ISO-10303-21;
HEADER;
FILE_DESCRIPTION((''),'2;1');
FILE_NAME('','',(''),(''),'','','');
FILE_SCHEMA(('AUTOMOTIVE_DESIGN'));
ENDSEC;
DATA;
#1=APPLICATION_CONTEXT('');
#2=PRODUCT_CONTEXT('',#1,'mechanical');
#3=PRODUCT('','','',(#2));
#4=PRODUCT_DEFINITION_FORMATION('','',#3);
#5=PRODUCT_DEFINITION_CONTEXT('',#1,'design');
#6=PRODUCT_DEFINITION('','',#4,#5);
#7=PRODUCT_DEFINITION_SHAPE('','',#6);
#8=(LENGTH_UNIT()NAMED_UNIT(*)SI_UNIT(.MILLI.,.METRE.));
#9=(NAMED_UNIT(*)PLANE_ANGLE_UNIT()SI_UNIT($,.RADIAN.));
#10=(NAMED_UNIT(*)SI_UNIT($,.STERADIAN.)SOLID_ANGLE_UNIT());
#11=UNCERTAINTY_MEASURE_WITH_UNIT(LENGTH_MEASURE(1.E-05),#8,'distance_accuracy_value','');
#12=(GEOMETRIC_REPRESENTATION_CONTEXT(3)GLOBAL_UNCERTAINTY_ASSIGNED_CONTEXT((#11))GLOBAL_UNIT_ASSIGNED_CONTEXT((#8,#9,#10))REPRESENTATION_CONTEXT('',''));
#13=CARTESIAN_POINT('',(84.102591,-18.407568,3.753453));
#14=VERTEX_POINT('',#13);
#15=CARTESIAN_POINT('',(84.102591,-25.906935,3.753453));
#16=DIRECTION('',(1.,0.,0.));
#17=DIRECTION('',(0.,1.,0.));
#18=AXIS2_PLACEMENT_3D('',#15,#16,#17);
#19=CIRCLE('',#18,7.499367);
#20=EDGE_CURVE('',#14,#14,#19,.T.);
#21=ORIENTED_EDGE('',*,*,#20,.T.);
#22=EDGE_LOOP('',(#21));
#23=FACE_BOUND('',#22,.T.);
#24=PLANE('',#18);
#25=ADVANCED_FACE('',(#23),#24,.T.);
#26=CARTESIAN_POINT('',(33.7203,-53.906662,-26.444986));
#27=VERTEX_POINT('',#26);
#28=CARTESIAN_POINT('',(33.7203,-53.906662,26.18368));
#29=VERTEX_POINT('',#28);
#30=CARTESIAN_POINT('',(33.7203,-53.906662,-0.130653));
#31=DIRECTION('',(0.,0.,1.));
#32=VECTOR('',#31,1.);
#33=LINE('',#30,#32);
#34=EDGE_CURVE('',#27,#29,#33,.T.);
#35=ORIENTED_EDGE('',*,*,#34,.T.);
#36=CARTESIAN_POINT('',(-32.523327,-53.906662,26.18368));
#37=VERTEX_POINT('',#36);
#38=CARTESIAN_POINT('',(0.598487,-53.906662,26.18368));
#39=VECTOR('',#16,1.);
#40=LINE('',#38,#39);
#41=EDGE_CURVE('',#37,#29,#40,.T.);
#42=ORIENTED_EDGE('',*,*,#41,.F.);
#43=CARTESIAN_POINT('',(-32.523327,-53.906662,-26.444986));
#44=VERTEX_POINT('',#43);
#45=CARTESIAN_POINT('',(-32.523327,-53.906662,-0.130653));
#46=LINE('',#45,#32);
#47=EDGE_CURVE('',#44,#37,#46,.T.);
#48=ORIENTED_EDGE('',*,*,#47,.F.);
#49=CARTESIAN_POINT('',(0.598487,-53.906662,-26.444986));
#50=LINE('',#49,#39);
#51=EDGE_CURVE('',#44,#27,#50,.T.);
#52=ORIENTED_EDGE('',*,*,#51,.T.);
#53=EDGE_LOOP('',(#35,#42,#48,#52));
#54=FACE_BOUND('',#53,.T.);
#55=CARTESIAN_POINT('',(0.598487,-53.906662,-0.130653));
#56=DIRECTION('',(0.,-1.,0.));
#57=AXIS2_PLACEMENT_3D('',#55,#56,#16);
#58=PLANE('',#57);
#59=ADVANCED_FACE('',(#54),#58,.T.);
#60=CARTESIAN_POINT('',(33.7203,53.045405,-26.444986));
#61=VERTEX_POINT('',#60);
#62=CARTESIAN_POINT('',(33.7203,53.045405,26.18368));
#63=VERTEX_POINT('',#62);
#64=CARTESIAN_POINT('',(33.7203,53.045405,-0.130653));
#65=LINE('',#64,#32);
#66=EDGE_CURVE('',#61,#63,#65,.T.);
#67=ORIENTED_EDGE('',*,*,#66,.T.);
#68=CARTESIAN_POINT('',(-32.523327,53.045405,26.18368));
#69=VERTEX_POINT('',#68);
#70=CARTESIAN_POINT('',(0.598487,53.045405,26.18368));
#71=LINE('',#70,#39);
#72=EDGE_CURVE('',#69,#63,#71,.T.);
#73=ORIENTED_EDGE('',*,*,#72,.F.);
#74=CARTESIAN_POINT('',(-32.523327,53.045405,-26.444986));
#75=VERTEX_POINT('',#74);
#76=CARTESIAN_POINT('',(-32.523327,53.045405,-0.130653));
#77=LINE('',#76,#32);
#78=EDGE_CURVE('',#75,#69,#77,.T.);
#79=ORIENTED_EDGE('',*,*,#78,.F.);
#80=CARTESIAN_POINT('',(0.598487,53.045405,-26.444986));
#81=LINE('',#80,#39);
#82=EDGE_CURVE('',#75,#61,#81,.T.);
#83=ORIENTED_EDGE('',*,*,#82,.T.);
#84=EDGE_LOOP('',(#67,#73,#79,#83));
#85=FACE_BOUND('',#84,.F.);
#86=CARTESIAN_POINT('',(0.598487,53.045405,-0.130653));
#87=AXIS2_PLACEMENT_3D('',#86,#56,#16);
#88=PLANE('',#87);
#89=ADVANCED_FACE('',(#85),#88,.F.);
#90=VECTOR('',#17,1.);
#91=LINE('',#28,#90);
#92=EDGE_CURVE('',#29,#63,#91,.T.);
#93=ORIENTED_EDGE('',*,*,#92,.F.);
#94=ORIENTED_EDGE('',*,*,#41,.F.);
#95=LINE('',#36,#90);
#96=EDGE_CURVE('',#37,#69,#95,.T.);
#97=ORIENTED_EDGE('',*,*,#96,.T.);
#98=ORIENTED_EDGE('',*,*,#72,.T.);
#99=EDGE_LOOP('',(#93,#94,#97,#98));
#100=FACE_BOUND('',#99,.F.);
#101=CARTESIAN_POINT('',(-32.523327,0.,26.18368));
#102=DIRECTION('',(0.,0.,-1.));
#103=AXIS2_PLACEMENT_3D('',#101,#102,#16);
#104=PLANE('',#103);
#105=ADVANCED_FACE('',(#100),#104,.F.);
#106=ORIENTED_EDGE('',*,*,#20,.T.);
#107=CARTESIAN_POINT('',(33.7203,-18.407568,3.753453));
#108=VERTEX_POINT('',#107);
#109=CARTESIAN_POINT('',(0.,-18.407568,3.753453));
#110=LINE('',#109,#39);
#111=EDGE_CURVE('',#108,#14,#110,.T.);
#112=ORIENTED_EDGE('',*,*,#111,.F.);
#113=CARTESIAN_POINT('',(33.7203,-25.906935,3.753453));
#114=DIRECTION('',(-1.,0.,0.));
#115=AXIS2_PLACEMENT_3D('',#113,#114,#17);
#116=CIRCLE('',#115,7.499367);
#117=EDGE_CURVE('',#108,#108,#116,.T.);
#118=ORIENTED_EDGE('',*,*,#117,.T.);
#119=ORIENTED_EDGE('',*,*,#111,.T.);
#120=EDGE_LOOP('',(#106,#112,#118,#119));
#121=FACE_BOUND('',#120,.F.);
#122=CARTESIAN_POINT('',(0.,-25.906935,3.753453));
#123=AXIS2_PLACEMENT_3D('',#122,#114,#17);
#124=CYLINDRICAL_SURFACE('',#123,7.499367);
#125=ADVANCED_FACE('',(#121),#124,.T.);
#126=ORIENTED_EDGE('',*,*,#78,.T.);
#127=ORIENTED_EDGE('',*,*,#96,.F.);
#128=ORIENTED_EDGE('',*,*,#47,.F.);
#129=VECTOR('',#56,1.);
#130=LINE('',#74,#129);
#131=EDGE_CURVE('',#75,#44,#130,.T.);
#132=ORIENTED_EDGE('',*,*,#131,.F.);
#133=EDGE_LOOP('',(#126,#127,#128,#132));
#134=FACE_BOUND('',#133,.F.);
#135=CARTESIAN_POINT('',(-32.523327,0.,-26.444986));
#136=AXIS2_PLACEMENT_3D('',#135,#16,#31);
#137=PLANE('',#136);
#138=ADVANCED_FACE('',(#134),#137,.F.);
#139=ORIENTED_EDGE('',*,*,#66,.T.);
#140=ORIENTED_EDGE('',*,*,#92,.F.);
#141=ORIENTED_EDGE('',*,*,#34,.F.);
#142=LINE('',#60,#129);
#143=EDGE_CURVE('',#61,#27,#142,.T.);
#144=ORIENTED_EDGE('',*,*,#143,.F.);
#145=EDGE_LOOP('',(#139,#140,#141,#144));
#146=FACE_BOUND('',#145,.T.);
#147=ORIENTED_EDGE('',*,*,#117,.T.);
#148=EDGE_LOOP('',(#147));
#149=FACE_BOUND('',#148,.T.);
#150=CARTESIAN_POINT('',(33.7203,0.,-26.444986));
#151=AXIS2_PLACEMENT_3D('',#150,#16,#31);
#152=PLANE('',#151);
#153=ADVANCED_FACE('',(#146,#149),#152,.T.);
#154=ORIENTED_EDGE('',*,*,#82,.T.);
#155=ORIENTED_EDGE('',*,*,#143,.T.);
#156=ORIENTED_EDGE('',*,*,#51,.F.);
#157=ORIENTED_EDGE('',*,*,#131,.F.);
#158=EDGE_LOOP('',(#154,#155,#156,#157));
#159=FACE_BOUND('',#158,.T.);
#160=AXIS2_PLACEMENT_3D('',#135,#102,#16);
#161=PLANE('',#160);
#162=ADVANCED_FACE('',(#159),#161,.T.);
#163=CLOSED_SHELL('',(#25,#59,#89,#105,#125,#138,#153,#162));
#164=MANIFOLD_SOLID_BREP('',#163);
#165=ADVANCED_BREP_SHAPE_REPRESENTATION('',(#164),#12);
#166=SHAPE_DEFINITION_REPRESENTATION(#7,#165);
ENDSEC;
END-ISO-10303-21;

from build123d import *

# Parameters (mm, degrees)
F0_W     = 66.2436261773
F0_H     = 52.6286661625
F1_DEPTH = 53.9066623896
F2_DEPTH = 53.045405075
F3_R     = 7.4993670996
F4_DEPTH = 84.1025914997


# Not quite as in the source:
# - a feature names something its author has since deleted; it is built from what else it names


with BuildPart() as f1:
    # F0 (on Front) → F1 (new body)
    with BuildSketch(Plane.XZ):
        with Locations((0.5984865129, -0.1306533813)):
            Rectangle(F0_W, F0_H)
    extrude(amount=F1_DEPTH)

    # F2 (add): a face of the model
    f2_faces = [f1.faces().sort_by_distance(p)[0] for p in [
        (0.5984865129, 0, -0.1306533813),
    ]]
    extrude(f2_faces, amount=F2_DEPTH)

    # F3 (on Right) → F4 (join)
    with BuildSketch(Plane.YZ):
        with Locations((-25.9069353342, 3.7534534931)):
            Circle(F3_R)
    extrude(amount=F4_DEPTH)


solid = f1.part
